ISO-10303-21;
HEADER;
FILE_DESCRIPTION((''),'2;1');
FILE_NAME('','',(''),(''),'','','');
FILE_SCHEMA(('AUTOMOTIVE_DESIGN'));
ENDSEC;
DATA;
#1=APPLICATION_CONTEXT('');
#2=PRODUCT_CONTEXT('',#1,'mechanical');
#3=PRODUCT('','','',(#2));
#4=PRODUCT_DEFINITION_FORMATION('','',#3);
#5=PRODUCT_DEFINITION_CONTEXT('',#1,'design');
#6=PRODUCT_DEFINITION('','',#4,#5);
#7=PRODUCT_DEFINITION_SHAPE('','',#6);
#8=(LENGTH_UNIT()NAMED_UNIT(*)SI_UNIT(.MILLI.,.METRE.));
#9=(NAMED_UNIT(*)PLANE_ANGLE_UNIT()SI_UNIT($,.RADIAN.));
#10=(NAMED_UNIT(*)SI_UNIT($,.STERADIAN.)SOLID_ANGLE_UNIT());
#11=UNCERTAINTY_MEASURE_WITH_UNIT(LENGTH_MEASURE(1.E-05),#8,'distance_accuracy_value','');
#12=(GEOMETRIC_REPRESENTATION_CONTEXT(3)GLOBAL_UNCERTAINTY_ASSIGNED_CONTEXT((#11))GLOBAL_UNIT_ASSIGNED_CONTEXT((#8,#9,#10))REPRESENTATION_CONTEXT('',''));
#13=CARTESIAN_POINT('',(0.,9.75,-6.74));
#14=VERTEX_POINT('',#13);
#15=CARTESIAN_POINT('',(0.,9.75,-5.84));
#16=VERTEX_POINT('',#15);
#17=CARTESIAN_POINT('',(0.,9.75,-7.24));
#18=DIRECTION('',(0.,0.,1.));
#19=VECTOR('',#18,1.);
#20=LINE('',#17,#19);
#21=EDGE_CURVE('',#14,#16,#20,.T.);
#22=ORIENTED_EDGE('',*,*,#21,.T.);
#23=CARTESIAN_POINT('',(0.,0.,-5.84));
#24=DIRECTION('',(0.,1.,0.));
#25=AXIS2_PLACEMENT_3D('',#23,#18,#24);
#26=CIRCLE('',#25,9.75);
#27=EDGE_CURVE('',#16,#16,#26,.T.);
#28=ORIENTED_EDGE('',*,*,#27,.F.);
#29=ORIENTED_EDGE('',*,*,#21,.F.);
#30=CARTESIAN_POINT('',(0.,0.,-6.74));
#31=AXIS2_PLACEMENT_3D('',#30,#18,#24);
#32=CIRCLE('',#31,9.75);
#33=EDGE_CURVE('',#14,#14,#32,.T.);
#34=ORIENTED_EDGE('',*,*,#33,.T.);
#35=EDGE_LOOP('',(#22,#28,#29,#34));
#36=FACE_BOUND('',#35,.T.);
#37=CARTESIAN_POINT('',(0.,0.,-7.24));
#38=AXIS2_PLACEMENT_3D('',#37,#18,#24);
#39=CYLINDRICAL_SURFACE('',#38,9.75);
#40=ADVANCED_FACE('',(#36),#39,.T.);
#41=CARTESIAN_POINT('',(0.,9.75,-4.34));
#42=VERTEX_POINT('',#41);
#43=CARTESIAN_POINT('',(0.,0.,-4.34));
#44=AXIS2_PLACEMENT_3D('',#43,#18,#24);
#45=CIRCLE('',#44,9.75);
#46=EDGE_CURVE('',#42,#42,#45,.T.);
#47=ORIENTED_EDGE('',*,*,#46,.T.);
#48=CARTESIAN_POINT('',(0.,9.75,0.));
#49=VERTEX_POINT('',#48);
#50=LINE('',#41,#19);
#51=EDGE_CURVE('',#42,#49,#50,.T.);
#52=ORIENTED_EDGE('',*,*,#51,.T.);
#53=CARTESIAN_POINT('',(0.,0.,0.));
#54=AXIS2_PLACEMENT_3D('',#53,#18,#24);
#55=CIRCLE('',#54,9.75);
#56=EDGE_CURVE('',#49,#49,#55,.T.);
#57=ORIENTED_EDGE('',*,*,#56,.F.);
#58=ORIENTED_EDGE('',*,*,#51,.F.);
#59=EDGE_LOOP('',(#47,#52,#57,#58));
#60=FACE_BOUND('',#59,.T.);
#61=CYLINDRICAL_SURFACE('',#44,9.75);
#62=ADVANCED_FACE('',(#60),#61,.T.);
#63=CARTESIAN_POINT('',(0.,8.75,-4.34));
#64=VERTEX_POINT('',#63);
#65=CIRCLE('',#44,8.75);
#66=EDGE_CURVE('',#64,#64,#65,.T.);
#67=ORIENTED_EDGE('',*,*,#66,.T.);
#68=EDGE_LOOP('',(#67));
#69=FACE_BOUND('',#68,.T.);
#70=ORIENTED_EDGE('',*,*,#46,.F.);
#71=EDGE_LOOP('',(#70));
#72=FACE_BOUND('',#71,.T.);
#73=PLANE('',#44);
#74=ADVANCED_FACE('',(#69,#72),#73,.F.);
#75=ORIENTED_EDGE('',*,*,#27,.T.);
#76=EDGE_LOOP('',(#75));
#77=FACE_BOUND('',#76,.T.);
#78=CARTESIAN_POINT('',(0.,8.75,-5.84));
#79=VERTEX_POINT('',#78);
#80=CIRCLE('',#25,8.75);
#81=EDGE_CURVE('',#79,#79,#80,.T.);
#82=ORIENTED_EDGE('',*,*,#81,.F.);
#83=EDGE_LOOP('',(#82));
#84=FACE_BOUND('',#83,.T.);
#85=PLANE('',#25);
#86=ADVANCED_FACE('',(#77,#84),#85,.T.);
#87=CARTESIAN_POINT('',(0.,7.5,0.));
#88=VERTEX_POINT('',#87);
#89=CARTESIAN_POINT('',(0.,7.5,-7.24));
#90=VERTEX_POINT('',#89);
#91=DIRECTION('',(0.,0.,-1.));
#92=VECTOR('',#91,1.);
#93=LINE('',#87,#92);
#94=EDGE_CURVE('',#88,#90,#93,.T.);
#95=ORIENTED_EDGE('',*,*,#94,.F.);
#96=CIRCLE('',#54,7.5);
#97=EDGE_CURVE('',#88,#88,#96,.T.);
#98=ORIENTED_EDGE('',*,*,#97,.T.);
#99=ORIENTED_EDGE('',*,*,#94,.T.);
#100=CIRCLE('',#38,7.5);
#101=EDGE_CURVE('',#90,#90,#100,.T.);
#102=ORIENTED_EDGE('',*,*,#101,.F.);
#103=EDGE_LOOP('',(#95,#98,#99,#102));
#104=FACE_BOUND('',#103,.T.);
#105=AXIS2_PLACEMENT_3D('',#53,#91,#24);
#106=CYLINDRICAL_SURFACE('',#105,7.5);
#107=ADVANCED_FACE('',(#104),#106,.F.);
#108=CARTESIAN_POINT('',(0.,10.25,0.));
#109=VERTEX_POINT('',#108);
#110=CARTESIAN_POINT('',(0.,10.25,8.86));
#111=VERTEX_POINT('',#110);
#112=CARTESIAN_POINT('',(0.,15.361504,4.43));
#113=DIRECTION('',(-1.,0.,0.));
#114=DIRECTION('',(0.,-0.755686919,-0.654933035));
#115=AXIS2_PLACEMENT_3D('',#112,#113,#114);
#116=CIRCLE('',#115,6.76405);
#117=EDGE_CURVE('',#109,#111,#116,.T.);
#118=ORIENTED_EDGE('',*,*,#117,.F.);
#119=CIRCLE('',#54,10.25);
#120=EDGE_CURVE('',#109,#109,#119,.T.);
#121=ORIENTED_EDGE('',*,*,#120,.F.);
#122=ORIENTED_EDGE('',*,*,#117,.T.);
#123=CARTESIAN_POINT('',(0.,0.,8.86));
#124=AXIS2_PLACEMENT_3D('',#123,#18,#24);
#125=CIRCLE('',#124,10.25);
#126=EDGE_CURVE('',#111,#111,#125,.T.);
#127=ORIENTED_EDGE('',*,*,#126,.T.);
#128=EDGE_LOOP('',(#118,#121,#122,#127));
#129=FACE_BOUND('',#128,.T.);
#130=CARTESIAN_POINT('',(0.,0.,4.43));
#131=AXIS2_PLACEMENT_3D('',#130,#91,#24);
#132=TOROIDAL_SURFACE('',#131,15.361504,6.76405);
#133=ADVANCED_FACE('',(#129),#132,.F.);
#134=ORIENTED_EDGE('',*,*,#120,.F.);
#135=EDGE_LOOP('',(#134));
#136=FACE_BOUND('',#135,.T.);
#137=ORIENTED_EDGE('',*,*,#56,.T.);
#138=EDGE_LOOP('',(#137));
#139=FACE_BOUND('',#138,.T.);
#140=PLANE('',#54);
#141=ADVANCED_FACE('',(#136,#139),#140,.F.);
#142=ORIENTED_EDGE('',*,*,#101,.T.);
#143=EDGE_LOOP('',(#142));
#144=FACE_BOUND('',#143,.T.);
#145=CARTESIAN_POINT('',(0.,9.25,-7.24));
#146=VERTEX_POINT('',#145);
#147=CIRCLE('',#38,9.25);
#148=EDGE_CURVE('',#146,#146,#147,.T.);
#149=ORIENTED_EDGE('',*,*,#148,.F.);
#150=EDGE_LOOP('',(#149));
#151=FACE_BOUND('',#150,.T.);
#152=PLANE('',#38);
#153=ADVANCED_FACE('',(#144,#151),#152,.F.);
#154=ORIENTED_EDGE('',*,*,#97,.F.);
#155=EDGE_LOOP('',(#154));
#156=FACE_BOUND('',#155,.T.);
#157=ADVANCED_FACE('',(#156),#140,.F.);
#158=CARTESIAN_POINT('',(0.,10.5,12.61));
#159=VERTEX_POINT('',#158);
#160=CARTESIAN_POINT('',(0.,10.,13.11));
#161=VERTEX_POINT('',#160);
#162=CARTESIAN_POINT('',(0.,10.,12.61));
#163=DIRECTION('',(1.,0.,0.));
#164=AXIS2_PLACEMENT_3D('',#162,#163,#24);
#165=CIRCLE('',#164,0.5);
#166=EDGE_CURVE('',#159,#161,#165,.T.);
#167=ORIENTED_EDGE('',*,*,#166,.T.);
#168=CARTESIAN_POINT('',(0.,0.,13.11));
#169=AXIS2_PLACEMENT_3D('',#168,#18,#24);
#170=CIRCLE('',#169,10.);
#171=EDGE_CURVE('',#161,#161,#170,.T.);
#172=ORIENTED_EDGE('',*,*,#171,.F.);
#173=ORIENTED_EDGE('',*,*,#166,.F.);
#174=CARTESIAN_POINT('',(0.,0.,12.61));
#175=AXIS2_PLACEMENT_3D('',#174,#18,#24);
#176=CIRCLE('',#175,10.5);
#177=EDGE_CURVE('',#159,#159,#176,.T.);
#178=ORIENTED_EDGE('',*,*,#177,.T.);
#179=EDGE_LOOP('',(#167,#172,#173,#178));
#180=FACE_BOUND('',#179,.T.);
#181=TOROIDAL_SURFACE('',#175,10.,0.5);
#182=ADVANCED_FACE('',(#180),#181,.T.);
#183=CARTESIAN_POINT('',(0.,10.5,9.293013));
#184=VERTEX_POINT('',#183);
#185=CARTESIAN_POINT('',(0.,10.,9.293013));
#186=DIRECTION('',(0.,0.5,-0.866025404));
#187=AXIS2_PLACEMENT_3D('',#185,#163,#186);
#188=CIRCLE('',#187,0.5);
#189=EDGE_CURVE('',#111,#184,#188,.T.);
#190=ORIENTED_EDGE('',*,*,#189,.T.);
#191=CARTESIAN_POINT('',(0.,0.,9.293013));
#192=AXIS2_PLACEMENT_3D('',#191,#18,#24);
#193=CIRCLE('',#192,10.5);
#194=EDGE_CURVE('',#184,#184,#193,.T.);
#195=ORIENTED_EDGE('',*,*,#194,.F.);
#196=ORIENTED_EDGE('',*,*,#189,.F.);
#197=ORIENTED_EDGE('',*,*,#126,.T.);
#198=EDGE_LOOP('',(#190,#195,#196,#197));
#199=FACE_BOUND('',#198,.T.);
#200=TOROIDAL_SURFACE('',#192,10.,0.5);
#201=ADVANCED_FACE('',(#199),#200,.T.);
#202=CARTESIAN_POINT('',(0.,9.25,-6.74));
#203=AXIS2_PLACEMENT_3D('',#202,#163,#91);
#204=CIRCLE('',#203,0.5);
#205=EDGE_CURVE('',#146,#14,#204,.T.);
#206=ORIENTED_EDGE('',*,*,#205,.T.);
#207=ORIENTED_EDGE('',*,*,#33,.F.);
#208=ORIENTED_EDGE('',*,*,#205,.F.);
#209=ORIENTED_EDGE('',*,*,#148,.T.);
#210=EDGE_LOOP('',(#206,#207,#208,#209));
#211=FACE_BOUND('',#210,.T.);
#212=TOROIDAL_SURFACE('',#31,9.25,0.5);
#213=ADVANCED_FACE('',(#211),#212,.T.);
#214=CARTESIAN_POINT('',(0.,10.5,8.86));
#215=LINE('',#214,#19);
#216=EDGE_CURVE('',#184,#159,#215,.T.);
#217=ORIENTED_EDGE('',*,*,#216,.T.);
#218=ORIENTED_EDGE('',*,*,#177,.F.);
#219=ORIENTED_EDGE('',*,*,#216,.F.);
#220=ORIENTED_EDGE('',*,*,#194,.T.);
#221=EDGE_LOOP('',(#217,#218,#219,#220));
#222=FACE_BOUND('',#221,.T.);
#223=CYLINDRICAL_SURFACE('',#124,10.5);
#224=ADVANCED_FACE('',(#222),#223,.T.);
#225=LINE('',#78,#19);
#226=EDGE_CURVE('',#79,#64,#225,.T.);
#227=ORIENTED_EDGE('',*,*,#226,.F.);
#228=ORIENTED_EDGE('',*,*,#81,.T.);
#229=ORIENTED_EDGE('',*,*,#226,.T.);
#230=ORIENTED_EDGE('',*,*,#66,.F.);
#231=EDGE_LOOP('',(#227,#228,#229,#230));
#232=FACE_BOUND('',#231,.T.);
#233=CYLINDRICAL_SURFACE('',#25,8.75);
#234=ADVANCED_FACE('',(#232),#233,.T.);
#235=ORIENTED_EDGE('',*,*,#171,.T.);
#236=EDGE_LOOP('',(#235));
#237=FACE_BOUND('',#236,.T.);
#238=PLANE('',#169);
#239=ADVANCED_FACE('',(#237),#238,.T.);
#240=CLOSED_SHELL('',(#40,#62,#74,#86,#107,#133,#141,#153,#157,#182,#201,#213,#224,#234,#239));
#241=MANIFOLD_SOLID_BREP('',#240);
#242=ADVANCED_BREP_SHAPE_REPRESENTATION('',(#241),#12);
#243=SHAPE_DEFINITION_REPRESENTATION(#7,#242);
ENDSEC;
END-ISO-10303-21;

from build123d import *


# Not quite as in the source:
# - a fillet or chamfer that OpenCascade refuses, or shapes differently, is made with other operations: its cross-section is extruded or revolved along the edge and cut away or added


with BuildPart() as f1:
    # F0 (on Right) → F1 (revolve)
    with BuildSketch(Plane.YZ):
        with BuildLine():
            Line((7.5, 0), (7.5, -7.24))
            Line((7.5, -7.24), (9.75, -7.24))
            Line((9.75, -7.24), (9.75, -5.84))
            Line((9.75, -5.84), (8.75, -5.84))
            Line((8.75, -5.84), (8.75, -4.34))
            Line((8.75, -4.34), (9.75, -4.34))
            Line((9.75, -4.34), (9.75, 0))
            Line((9.75, 0), (10.25, 0))
            ThreePointArc((10.25, 0), (8.5974540278, 4.43), (10.25, 8.86))
            Line((10.25, 8.86), (10.5, 8.86))
            Line((10.5, 8.86), (10.5, 13.11))
            Line((10.5, 13.11), (0, 13.11))
            Line((0, 13.11), (0, 8.86))
            Line((0, 8.86), (0, 0))
            Line((0, 0), (7.5, 0))
        make_face()
    revolve(axis=Axis((0, 0, 4.43), (0, 0, 1)))

    # F2: fillet of radius 0.5 on 3 edges, made by hand

    # F2_s1 → F2_t2 (revolve, cut)
    with BuildSketch(Plane.YZ):
        with BuildLine():
            ThreePointArc((10.25, 8.86), (10.4330127019, 9.0430127019), (10.5, 9.2930127019))
            Line((10.5, 9.2930127019), (10.5, 8.86))
            Line((10.5, 8.86), (10.25, 8.86))
        make_face()
    revolve(axis=Axis((0, 0, 8.86), (0, 0, 1)), mode=Mode.SUBTRACT)

    # F2_s3 → F2_t4 (revolve, cut)
    with BuildSketch(Plane.YZ):
        with BuildLine():
            ThreePointArc((9.25, -7.24), (9.6035533906, -7.0935533906), (9.75, -6.74))
            Line((9.75, -6.74), (9.75, -7.24))
            Line((9.75, -7.24), (9.25, -7.24))
        make_face()
    revolve(axis=Axis((0, 0, -7.24), (0, 0, 1)), mode=Mode.SUBTRACT)

    # F2_s5 → F2_t6 (revolve, cut)
    with BuildSketch(Plane.YZ):
        with BuildLine():
            ThreePointArc((10.5, 12.61), (10.3535533906, 12.9635533906), (10, 13.11))
            Line((10, 13.11), (10.5, 13.11))
            Line((10.5, 13.11), (10.5, 12.61))
        make_face()
    revolve(axis=Axis((0, 0, 13.11), (0, 0, 1)), mode=Mode.SUBTRACT)


solid = f1.part
